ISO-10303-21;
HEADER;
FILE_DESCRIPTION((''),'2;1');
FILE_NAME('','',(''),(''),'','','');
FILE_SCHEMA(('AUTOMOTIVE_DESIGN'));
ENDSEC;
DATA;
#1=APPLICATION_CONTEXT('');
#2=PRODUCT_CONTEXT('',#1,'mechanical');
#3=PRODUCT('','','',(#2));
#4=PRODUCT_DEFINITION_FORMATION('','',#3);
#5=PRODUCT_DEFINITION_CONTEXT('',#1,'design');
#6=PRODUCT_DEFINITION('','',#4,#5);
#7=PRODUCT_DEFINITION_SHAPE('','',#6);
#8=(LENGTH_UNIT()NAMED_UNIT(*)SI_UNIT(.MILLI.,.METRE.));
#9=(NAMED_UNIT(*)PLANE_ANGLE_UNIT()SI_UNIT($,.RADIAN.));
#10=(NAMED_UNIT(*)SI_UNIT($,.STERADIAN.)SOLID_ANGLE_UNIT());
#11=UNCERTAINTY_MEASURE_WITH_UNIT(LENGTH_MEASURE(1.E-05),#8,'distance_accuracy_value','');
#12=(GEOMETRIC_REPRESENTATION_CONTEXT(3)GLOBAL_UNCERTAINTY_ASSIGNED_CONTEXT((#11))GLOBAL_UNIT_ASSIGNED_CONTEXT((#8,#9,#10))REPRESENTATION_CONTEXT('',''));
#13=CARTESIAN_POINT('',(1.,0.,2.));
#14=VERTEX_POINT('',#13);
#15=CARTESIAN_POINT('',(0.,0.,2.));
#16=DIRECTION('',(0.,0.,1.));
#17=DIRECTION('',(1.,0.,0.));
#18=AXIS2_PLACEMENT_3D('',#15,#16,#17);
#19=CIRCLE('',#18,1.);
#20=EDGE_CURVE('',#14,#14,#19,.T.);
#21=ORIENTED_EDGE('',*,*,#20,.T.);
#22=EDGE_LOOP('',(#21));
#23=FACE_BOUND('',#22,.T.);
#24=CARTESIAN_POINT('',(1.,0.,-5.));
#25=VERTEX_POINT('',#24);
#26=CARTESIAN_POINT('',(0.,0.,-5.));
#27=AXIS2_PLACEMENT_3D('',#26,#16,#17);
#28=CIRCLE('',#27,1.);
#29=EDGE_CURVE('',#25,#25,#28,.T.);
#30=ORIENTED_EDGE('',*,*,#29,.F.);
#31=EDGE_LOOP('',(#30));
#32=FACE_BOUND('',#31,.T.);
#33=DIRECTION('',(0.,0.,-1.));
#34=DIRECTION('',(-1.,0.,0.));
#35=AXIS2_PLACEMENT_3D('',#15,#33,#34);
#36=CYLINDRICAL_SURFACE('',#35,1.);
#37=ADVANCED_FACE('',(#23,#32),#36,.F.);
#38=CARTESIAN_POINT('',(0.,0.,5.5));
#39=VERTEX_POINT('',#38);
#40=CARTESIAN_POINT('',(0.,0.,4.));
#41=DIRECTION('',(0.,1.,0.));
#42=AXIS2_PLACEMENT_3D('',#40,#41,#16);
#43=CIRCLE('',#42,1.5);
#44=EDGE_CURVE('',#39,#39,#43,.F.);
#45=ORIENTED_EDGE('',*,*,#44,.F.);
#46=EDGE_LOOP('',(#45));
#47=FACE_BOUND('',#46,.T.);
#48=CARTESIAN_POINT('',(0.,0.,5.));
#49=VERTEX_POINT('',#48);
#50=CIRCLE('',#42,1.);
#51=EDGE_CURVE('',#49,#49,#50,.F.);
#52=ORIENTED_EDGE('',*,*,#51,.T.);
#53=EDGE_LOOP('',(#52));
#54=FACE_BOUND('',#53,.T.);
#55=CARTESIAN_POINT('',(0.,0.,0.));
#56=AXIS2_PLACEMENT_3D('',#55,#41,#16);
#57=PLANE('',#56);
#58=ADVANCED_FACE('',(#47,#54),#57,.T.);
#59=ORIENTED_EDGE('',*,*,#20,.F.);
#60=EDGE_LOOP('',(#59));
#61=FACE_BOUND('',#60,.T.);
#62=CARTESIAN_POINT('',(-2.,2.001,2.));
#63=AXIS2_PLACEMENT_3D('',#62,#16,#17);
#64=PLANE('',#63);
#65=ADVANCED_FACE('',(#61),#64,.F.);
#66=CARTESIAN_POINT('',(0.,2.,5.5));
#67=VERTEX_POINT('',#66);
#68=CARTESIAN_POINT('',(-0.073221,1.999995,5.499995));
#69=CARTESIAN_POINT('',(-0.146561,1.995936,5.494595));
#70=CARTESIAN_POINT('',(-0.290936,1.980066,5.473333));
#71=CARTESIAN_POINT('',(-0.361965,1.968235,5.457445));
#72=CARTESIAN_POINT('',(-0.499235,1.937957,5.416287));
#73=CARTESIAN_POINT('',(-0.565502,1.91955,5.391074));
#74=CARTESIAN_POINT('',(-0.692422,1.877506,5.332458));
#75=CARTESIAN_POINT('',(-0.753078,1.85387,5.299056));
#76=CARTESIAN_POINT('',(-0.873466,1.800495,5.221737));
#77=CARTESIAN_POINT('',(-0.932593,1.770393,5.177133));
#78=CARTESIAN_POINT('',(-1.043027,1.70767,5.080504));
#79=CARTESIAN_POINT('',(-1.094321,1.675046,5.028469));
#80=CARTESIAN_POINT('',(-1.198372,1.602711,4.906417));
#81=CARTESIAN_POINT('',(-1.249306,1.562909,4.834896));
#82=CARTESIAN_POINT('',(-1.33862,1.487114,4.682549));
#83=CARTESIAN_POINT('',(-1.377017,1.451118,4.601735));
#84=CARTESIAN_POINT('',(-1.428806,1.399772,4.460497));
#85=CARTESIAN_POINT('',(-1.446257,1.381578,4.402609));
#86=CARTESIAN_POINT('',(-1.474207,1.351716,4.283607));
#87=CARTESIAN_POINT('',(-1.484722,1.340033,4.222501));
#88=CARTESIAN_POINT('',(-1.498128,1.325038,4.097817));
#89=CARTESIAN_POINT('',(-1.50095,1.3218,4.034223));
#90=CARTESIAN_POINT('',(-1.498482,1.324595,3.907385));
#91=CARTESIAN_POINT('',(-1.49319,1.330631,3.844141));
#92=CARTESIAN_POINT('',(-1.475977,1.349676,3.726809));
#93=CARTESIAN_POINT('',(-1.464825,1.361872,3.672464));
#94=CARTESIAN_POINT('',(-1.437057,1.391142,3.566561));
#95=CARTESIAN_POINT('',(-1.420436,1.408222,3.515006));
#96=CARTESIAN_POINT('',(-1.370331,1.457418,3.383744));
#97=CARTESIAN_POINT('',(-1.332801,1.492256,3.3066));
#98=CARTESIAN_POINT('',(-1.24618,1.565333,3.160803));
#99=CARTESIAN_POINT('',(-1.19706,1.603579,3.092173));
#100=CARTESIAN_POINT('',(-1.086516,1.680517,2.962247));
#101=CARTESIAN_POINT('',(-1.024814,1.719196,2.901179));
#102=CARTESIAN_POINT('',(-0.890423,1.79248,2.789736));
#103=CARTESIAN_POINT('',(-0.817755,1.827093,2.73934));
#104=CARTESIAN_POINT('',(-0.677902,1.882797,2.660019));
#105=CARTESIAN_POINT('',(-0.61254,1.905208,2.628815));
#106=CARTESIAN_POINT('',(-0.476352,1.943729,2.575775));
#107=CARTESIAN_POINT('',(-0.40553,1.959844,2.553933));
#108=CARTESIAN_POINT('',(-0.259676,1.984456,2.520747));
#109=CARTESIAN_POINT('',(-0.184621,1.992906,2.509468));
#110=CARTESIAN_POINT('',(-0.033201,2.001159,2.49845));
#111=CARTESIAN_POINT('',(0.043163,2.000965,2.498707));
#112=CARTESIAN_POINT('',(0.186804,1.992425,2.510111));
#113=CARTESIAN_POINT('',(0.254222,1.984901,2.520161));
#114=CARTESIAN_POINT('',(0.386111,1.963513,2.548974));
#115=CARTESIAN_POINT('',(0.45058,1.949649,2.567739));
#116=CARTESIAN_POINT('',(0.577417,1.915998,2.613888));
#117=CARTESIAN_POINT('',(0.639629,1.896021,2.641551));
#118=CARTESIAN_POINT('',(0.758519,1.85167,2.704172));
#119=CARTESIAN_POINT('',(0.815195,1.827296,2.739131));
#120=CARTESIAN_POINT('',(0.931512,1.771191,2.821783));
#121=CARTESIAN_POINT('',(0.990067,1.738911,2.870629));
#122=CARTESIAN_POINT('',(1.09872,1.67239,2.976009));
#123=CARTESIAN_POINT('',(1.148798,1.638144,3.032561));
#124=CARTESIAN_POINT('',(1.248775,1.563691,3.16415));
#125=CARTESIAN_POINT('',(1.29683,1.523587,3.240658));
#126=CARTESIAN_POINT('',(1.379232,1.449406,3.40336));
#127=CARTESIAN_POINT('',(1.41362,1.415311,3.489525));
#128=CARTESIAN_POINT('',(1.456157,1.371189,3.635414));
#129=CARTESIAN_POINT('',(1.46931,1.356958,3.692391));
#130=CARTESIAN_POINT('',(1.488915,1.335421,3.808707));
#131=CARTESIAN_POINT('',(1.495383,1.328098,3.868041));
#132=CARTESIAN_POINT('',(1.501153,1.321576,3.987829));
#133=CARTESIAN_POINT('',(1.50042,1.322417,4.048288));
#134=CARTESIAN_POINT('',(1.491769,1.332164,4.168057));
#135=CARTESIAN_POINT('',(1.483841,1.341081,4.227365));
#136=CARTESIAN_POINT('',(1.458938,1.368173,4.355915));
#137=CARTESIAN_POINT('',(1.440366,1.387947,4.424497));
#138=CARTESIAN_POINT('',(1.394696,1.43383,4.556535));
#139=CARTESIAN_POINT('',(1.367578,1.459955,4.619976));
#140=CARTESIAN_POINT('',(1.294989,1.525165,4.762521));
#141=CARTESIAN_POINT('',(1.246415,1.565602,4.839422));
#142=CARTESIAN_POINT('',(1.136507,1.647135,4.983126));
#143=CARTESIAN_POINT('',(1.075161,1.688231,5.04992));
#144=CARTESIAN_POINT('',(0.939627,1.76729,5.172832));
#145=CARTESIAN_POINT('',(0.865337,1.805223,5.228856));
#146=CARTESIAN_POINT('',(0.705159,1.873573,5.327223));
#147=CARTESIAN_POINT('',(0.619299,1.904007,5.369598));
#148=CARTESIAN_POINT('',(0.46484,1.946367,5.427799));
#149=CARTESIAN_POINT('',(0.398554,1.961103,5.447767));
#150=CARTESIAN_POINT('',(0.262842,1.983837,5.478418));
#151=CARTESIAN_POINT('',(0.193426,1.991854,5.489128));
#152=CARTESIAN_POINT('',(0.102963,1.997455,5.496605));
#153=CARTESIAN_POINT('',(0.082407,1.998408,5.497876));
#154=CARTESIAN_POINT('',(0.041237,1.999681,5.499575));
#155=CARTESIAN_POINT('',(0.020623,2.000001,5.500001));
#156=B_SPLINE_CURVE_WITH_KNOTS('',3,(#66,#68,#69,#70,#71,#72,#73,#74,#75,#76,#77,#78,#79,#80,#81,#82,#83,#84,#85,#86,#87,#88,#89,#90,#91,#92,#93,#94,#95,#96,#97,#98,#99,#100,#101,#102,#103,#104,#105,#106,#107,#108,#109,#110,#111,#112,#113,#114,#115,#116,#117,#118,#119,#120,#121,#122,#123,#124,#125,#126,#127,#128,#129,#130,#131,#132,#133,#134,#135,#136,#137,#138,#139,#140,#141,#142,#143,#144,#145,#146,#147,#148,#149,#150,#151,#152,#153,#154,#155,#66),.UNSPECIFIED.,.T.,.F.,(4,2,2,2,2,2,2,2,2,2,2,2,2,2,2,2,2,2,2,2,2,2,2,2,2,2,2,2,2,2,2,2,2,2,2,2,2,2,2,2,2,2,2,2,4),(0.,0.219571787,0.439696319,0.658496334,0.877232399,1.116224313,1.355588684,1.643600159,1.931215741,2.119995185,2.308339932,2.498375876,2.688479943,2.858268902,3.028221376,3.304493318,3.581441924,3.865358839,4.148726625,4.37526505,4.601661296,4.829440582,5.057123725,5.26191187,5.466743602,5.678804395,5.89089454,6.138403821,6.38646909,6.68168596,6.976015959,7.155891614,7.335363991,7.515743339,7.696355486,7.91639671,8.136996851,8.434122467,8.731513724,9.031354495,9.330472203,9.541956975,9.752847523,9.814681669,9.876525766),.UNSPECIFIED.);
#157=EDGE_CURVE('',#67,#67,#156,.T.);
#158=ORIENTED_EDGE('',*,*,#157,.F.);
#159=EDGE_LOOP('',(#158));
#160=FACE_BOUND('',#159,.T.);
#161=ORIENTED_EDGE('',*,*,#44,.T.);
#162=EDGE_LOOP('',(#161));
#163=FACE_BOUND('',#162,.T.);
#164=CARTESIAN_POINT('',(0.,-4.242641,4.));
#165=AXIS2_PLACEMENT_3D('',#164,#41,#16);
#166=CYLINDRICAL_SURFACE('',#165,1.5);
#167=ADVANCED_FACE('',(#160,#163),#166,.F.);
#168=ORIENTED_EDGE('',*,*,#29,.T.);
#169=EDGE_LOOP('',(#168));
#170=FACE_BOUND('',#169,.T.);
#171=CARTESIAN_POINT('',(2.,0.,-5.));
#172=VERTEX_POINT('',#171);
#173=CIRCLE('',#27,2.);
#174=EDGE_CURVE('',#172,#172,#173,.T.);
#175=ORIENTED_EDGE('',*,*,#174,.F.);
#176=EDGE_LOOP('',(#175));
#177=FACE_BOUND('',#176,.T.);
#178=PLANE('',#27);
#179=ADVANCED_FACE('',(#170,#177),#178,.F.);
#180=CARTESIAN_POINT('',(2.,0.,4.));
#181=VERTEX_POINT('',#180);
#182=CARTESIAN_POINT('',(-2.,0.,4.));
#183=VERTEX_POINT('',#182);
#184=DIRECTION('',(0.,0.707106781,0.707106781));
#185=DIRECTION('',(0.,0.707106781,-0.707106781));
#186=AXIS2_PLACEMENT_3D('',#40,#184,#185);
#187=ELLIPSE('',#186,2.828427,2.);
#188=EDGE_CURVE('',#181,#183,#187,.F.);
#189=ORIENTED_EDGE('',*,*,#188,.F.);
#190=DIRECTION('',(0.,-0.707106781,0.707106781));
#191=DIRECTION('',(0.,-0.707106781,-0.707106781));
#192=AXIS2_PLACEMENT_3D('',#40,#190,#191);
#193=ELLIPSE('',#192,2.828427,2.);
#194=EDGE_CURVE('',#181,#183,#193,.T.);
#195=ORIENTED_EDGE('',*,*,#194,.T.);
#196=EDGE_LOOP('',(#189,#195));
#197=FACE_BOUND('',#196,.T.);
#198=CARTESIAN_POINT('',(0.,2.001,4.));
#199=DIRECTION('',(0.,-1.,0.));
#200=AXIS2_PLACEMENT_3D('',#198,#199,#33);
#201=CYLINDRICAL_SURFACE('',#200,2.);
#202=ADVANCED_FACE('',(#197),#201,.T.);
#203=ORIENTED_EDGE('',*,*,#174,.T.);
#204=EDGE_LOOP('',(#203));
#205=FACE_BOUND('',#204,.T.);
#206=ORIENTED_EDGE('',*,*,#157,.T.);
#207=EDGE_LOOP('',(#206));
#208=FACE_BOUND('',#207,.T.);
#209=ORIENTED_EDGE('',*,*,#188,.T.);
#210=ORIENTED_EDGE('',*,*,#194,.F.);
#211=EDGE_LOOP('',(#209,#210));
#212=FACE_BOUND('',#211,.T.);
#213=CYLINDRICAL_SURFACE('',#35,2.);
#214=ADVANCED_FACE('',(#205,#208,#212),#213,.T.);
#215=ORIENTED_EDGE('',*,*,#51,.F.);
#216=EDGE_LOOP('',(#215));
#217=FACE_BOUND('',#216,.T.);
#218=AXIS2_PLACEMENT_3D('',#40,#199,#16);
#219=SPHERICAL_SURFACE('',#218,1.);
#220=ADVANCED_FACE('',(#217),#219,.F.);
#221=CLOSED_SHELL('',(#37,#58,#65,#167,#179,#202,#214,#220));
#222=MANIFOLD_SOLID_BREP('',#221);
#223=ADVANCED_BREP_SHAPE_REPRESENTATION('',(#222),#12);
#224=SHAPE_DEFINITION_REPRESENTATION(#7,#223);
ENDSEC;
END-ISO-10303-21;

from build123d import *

# Parameters (mm, degrees)
BOSS_EXTRU_1_DEPTH       = 2
BOSS_EXTRU_1_DEPTH_BACK  = 5
ESQUISSE1_R              = 2
ESQUISSE1_R_2            = 1
BOSS_EXTRU_2_START       = 2
BOSS_EXTRU_2_OUTLINE_R   = 2
BOSS_EXTRU_2_DEPTH       = 2
BOSS_EXTRU_2_START_2     = 4
BOSS_EXTRU_2_2_OUTLINE_R = 2
BOSS_EXTRU_2_2_DEPTH     = 2
BOSS_EXTRU_2_START_3     = -3
BOSS_EXTRU_2_3_DEPTH     = 6
ENL_V_START              = -2
ESQUISSE4_R              = 1.5
ENL_V_MAT_EXTRU_1_DEPTH  = 2


with BuildPart() as part:
    # Esquisse1 → Boss.-Extru.1 (new, two sides: drawn at the far end of the back side and taken through both)
    with BuildSketch(Plane.XY.offset(-BOSS_EXTRU_1_DEPTH_BACK)):
        Circle(ESQUISSE1_R)
        Circle(ESQUISSE1_R_2, mode=Mode.SUBTRACT)
    extrude(amount=BOSS_EXTRU_1_DEPTH + BOSS_EXTRU_1_DEPTH_BACK)

    # Boss.-Extru.2: read off the stored shape, not the designer's step
    # Boss.-Extru.2 outline → Boss.-Extru.2 (add)
    with BuildSketch(Plane.XY.offset(BOSS_EXTRU_2_START)):
        Circle(BOSS_EXTRU_2_OUTLINE_R)
    extrude(amount=BOSS_EXTRU_2_DEPTH)

    # Boss.-Extru.2 2 outline → Boss.-Extru.2 2 (add)
    with BuildSketch(Plane.XY.offset(BOSS_EXTRU_2_START_2)):
        Circle(BOSS_EXTRU_2_2_OUTLINE_R)
    extrude(amount=BOSS_EXTRU_2_2_DEPTH)

    # Boss.-Extru.2 3 outline → Boss.-Extru.2 3 (cut)
    with BuildSketch(Plane(origin=(0, 0, 0), x_dir=(1, 0, 0), z_dir=(0, 1, 0)).offset(BOSS_EXTRU_2_START_3)):
        with BuildLine():
            Line((2, -3), (2, -4))
            ThreePointArc((2, -4), (1.414213562, -5.414213562), (0, -6))
            Line((0, -6), (3, -6))
            Line((3, -6), (3, -3))
            Line((3, -3), (2, -3))
        make_face()
        with BuildLine():
            Line((-3, -6), (0, -6))
            ThreePointArc((0, -6), (-1.414213562, -5.414213562), (-2, -4))
            Line((-2, -4), (-2, -3))
            Line((-2, -3), (-3, -3))
            Line((-3, -3), (-3, -6))
        make_face()
    extrude(amount=BOSS_EXTRU_2_3_DEPTH, mode=Mode.SUBTRACT)

    # Esquisse3 → Enlèvement de matière-Révolution1 (revolve, cut)
    with BuildSketch(Plane(origin=(0, 0, 0), x_dir=(0, 0, -1), z_dir=(1, 0, 0))):
        with BuildLine():
            Line((-4, -1), (-4, 1))
            ThreePointArc((-4, 1), (-3, 0), (-4, -1))
        make_face()
    revolve(axis=Axis((0, -1, 4), (0, 1, 0)), mode=Mode.SUBTRACT)

    # Esquisse4 → Enlèv. mat.-Extru.1 (cut)
    with BuildSketch(Plane(origin=(0, 2, 0), x_dir=(1, 0, 0), z_dir=(0, 1, 0)).offset(ENL_V_START)):
        with Locations(Location((0, -4, 0), (0, 0, 270))):
            Circle(ESQUISSE4_R)
    extrude(amount=ENL_V_MAT_EXTRU_1_DEPTH, mode=Mode.SUBTRACT)


solid = part.part
